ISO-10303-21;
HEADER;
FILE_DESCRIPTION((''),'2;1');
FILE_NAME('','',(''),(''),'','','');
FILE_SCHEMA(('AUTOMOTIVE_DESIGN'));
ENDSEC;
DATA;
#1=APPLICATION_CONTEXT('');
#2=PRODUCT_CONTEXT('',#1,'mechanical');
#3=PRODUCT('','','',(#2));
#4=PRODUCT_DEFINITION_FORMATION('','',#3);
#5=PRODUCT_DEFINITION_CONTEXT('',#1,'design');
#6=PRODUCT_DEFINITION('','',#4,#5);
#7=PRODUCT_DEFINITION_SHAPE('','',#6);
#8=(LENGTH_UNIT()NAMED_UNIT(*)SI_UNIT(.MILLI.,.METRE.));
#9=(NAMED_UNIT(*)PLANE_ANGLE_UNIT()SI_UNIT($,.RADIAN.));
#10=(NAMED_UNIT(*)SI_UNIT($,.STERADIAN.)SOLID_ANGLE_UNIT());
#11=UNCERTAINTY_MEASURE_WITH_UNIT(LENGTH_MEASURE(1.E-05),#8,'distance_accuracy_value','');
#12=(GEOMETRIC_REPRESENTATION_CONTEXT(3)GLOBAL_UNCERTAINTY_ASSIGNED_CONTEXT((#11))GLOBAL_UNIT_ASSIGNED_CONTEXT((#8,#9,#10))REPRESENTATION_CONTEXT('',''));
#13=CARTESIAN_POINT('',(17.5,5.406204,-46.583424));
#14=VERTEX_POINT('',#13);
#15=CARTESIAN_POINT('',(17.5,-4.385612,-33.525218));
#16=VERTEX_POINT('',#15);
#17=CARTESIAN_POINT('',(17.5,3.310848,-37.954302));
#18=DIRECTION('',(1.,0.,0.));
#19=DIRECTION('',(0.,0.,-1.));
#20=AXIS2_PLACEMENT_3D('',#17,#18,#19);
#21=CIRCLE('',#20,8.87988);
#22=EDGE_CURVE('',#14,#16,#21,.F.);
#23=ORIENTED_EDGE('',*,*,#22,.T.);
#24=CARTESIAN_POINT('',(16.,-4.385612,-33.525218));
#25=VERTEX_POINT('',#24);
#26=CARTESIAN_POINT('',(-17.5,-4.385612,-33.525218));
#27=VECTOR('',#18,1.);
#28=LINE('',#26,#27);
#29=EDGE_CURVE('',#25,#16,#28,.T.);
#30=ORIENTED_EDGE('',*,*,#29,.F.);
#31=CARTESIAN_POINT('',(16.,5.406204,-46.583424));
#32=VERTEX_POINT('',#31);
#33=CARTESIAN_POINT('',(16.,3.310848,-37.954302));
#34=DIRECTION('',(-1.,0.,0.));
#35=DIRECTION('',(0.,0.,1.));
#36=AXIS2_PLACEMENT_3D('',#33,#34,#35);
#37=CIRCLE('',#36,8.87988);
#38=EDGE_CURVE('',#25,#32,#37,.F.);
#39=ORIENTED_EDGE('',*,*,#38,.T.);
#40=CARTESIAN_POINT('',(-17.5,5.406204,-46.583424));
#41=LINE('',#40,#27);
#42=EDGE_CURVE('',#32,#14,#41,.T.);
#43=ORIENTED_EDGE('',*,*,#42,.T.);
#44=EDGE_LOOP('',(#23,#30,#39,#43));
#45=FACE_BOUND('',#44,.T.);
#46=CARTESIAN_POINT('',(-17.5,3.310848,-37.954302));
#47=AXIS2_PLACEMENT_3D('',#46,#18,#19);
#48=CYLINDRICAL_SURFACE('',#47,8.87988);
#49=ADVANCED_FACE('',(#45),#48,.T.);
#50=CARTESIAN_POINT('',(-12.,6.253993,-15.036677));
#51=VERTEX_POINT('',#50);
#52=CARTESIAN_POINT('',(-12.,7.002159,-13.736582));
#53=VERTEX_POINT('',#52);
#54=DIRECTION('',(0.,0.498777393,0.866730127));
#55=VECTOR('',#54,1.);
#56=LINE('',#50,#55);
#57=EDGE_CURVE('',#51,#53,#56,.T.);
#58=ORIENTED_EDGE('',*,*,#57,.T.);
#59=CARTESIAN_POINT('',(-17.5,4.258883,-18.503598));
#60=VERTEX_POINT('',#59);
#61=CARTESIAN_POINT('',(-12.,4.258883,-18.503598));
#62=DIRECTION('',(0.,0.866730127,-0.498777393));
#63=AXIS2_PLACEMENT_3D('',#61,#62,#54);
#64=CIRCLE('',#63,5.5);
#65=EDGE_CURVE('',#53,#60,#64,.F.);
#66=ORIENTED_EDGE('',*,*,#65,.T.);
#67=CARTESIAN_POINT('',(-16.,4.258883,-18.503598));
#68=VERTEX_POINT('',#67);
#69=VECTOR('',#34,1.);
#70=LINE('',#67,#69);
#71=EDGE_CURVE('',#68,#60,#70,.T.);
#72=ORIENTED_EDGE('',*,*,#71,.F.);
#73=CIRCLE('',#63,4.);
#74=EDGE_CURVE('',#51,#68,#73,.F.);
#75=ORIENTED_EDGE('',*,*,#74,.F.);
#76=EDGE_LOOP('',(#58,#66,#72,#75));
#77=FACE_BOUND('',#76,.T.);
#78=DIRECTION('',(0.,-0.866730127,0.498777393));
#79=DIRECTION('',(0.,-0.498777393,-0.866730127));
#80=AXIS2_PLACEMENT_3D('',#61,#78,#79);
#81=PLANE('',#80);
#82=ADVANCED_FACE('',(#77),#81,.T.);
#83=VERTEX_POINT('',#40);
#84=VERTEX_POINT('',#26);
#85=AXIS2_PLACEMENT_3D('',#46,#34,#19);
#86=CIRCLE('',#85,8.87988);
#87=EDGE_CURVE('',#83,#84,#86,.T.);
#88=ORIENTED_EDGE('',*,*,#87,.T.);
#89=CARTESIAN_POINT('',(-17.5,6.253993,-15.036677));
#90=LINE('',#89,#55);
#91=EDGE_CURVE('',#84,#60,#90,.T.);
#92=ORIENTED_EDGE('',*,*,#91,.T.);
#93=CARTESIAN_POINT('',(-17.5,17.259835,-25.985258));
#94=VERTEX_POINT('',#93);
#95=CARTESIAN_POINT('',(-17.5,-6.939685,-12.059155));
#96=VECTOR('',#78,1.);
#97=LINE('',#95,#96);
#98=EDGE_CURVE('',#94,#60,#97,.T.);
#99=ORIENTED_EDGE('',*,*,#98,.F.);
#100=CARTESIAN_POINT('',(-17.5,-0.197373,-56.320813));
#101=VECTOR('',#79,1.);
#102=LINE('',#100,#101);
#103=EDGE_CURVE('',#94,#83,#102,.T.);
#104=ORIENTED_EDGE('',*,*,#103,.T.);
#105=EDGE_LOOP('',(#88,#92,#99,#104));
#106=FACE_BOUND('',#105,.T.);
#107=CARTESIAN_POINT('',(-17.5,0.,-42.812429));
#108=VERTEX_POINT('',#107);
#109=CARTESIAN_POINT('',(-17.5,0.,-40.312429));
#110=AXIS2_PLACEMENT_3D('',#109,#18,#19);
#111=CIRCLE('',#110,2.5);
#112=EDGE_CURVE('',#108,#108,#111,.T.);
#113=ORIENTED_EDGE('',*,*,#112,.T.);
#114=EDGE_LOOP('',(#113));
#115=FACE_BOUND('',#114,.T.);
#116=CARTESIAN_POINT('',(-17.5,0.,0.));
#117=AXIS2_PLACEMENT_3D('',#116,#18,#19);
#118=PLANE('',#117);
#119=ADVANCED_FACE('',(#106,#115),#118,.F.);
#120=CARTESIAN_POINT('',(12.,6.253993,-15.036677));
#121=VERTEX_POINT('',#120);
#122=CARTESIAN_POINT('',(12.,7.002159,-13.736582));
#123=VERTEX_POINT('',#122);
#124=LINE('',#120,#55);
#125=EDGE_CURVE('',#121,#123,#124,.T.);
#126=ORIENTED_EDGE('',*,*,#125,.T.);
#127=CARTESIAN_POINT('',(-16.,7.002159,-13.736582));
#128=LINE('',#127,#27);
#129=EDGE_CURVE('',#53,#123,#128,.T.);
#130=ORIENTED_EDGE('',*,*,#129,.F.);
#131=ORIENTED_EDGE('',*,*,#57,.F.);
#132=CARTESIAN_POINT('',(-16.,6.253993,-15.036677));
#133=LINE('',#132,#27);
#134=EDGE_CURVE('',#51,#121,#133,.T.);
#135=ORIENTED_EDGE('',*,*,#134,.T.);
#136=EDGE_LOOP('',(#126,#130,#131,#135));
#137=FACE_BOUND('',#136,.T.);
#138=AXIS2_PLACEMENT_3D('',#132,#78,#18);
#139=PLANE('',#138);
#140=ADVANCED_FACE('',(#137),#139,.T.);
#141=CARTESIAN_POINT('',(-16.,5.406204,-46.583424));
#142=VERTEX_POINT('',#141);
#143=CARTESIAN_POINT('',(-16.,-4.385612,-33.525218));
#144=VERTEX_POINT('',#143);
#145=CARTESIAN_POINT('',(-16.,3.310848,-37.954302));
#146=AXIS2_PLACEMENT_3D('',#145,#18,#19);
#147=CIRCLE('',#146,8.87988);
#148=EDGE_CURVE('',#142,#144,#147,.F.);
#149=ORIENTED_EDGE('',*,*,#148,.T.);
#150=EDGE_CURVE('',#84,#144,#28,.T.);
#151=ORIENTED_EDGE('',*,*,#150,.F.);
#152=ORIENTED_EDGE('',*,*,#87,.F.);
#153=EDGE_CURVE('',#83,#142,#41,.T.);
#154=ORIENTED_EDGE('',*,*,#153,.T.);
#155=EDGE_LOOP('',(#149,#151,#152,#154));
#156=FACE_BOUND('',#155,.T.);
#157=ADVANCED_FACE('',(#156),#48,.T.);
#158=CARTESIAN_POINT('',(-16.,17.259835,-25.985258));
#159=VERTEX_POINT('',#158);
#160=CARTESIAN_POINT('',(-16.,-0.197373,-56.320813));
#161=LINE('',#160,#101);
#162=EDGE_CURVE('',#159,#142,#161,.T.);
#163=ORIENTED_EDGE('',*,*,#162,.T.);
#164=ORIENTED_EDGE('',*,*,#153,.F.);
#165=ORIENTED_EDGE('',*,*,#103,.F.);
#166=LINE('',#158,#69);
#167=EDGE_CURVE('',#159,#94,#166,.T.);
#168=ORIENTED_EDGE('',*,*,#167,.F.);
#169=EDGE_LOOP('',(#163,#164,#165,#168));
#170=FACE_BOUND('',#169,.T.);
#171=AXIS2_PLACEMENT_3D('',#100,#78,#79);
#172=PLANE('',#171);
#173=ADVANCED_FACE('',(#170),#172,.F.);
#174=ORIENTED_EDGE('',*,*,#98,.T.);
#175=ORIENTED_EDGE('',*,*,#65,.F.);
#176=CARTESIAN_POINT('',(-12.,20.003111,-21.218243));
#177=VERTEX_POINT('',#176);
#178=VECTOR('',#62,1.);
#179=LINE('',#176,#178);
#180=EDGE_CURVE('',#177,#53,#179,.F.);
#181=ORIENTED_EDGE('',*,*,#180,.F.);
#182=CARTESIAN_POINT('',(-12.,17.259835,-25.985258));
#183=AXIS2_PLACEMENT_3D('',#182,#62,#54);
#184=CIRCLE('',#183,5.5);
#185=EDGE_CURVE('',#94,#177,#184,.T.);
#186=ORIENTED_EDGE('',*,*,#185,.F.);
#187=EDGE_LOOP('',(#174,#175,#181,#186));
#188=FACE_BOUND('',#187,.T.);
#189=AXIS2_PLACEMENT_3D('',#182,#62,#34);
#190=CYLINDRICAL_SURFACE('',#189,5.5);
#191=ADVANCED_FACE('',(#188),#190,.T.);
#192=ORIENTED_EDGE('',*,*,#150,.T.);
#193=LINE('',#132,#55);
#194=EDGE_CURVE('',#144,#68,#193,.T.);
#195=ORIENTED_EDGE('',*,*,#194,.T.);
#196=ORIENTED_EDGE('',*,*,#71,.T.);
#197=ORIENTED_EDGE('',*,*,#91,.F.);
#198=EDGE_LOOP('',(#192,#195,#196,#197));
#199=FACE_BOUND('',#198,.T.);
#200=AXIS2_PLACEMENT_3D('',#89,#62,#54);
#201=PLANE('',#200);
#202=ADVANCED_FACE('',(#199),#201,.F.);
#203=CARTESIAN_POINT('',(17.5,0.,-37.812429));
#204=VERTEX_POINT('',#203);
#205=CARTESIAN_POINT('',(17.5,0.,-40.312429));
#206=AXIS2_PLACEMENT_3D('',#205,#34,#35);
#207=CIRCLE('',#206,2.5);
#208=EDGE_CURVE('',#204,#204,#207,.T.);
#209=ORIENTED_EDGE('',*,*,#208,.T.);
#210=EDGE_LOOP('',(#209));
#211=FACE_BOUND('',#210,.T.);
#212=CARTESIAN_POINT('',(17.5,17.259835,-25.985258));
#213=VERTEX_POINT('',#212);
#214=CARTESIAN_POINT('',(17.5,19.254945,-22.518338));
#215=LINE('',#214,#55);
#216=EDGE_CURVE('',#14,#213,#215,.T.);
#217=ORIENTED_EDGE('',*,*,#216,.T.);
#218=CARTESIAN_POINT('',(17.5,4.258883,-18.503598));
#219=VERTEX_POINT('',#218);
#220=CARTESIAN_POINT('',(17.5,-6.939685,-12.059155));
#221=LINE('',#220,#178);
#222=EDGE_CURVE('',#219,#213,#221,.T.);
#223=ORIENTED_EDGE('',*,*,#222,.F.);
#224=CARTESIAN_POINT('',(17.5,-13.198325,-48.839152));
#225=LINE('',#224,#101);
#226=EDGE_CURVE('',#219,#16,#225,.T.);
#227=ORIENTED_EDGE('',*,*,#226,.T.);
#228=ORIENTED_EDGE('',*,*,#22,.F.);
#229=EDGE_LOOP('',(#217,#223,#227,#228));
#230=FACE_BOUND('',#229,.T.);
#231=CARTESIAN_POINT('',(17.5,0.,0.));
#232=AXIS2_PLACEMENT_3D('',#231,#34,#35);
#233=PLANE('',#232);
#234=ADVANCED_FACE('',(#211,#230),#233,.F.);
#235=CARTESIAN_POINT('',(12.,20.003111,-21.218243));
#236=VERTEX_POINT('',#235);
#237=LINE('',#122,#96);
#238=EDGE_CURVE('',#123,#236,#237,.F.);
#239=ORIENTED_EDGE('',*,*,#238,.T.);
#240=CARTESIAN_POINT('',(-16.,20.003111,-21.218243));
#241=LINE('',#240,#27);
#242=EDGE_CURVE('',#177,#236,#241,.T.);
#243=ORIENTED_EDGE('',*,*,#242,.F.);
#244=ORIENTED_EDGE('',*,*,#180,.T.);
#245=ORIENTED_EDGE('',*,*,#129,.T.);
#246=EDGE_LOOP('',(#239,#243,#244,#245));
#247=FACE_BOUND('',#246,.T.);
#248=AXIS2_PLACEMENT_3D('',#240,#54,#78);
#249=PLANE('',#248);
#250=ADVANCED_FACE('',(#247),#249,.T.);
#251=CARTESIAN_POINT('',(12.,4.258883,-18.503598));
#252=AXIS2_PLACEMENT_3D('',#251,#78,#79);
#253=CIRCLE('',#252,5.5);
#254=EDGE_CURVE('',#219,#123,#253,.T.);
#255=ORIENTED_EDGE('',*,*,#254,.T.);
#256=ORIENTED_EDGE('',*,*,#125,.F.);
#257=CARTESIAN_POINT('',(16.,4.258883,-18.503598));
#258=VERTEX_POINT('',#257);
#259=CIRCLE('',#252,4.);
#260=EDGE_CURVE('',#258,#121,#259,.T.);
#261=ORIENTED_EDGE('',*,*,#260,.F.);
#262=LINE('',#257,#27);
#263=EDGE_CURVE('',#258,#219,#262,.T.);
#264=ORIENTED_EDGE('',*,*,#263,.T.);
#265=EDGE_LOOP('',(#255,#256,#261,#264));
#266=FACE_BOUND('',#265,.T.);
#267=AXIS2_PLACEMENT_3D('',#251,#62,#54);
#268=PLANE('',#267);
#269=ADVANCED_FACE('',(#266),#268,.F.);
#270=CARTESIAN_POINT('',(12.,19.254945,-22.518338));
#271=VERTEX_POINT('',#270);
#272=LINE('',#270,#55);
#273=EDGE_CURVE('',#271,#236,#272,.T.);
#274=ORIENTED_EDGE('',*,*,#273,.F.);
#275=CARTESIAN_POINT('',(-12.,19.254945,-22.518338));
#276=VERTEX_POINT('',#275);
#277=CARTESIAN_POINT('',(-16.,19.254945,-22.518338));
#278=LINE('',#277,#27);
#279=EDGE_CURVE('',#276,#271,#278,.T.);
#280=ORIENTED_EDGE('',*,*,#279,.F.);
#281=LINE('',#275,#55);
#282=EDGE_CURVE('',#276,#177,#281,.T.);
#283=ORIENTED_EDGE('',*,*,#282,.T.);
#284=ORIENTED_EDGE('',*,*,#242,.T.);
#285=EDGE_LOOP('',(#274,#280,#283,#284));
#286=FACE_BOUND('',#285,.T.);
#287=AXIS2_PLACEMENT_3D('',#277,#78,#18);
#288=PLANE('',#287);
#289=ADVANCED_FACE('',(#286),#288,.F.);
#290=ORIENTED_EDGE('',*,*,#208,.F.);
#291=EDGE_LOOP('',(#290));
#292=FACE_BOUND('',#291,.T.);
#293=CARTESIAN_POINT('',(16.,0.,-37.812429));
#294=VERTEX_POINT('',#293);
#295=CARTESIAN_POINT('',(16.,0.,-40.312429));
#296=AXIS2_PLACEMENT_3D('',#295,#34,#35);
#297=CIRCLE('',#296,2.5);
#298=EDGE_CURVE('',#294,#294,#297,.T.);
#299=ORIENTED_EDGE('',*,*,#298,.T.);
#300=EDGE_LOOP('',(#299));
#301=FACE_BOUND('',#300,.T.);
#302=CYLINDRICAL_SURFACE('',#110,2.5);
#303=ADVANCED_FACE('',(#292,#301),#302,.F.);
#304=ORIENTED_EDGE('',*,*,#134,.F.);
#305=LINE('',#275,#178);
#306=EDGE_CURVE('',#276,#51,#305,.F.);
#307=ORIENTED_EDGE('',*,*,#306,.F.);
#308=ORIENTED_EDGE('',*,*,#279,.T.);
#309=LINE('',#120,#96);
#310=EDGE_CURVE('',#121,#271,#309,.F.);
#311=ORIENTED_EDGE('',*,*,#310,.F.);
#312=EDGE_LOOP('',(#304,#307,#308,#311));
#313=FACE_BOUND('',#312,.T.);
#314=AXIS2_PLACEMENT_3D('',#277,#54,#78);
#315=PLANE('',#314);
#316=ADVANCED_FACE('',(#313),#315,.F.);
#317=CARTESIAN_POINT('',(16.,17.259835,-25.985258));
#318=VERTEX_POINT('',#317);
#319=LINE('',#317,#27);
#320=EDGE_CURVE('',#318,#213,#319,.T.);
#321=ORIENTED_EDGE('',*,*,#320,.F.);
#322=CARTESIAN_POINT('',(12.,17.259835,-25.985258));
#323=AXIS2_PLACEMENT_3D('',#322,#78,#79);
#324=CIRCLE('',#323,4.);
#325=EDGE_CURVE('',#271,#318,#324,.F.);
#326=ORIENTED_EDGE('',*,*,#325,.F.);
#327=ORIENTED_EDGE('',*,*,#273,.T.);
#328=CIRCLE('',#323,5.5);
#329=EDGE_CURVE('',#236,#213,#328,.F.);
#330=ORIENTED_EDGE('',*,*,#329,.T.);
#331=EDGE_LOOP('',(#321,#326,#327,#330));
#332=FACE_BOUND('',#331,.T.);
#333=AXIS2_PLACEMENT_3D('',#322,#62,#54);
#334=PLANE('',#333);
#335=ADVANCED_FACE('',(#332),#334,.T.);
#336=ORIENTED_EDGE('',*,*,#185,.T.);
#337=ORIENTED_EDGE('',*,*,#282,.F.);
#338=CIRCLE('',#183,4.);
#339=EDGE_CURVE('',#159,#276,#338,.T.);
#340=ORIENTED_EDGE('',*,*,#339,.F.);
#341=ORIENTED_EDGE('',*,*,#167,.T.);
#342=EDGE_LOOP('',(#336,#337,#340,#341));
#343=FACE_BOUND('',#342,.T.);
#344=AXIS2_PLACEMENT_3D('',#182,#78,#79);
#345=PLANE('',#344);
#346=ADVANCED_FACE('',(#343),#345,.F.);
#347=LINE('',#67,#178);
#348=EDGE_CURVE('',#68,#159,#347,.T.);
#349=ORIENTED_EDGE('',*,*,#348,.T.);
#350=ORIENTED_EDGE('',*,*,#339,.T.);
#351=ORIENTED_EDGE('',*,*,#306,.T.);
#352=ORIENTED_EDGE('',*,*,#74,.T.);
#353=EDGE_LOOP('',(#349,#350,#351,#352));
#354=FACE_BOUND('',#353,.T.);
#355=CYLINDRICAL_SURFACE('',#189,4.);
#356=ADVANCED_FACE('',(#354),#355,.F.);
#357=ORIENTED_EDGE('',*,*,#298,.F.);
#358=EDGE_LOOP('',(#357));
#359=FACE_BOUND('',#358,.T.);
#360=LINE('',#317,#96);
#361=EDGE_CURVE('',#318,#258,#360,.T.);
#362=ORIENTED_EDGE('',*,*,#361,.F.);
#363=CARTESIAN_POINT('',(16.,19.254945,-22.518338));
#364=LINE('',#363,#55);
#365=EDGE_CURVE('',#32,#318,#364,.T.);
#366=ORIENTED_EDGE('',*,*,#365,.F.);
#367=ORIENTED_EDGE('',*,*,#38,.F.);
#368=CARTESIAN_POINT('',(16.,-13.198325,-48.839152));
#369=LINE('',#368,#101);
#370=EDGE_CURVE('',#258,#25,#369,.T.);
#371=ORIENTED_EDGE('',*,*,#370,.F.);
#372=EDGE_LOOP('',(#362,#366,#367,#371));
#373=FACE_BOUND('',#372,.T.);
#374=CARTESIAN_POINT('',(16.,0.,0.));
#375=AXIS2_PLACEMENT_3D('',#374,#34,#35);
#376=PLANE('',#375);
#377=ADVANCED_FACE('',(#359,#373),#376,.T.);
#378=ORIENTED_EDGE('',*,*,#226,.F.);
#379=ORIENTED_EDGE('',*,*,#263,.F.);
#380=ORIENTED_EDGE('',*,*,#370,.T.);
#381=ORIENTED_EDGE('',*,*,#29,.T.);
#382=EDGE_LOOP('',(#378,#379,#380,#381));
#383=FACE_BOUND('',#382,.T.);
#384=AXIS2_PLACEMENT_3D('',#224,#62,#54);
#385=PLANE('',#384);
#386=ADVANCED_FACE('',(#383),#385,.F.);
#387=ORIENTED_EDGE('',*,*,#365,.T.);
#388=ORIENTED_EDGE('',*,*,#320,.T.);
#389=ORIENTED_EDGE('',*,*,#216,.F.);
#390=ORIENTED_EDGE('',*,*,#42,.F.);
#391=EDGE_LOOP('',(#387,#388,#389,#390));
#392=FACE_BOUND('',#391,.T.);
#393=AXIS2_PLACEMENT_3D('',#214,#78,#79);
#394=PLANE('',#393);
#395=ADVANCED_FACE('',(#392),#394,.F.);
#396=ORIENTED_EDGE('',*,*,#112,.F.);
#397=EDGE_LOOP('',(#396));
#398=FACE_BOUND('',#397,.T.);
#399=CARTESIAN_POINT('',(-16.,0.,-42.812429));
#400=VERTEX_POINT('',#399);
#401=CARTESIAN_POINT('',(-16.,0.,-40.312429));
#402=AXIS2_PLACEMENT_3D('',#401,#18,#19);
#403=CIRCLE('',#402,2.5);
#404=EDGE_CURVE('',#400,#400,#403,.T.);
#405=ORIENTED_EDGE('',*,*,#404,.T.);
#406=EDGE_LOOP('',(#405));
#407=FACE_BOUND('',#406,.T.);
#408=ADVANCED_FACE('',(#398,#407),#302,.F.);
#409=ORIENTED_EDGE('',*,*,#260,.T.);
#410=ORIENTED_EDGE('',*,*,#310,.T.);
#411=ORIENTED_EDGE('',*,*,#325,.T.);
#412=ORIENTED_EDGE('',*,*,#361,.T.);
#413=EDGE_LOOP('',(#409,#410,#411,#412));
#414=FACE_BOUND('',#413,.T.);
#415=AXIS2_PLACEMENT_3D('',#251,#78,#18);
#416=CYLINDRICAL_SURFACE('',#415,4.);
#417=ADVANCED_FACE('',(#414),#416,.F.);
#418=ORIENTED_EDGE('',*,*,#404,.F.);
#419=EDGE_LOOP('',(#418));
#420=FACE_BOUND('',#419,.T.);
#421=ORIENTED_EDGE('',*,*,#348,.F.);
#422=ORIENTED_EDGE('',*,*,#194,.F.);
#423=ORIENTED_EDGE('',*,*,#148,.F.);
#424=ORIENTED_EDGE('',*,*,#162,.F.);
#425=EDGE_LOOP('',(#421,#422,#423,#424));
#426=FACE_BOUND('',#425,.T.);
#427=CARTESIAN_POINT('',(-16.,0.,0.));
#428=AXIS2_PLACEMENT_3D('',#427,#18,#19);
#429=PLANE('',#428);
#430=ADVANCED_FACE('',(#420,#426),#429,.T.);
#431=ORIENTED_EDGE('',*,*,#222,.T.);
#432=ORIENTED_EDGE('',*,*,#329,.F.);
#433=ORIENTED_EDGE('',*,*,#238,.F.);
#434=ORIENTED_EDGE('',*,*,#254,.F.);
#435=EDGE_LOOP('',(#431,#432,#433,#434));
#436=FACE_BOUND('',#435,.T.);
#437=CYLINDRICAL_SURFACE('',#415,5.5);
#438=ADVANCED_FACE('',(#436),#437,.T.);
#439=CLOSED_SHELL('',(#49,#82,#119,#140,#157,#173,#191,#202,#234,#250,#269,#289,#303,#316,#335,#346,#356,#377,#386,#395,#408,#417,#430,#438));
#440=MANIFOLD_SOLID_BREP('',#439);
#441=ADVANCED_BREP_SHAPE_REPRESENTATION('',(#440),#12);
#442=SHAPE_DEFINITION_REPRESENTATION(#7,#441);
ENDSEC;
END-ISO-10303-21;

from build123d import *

# Parameters (mm, degrees)
BOSS_EXTRUDE1_DEPTH            = 16
BOSS_EXTRUDE1_DEPTH_BACK       = 16
EDGE_FLANGE1_STRIP_W           = 14
EDGE_FLANGE1_STRIP_H           = 1.5
EDGE_FLANGE1_STRIP_CUT_DEPTH   = 15
EDGE_FLANGE1_STRIP_2_W         = 14
EDGE_FLANGE1_STRIP_2_H         = 1.5
EDGE_FLANGE1_STRIP_CUT_2_DEPTH = 15
EDGE_FLANGE1_DEPTH             = 15
EDGE_FLANGE1_BEND_DEPTH        = 15
CUT_EXTRUDE1_DEPTH             = 70.261521918
CUT_EXTRUDE1_DEPTH_BACK        = 70.261521918
SKETCH12_R                     = 2.5


# Sheet-metal steps are written as plain solids
with BuildPart() as part:
    # Sketch1 → Boss-Extrude1 (new, two sides: drawn at the far end of the back side and taken through both)
    with BuildSketch(Plane(origin=(0, 0, 0), x_dir=(0, 0, -1), z_dir=(1, 0, 0)).offset(-BOSS_EXTRUDE1_DEPTH_BACK)):
        Polygon((13.736581906, 7.002159097), (21.218242798, 20.003110997), (22.518337988, 19.254944908), (15.036677096, 6.253993008), align=None)
    extrude(amount=BOSS_EXTRUDE1_DEPTH + BOSS_EXTRUDE1_DEPTH_BACK)

    # Edge-Flange1 strip (across the edge) → Edge-Flange1 strip cut (cut)
    with BuildSketch(Plane(origin=(16, 19.254944908, -22.518337988), x_dir=(-1, 0, 0), z_dir=(0, -0.8667301266485011, 0.498777392791487))):
        with Locations((-3, -0.75)):
            Rectangle(EDGE_FLANGE1_STRIP_W, EDGE_FLANGE1_STRIP_H)
    extrude(amount=EDGE_FLANGE1_STRIP_CUT_DEPTH, mode=Mode.SUBTRACT)

    # Edge-Flange1 strip 2 (across the edge) → Edge-Flange1 strip cut 2 (cut)
    with BuildSketch(Plane(origin=(-16, 6.253993008, -15.036677096), x_dir=(1, 0, 0), z_dir=(0, 0.8667301266485011, -0.498777392791487))):
        with Locations((-3, -0.75)):
            Rectangle(EDGE_FLANGE1_STRIP_2_W, EDGE_FLANGE1_STRIP_2_H)
    extrude(amount=EDGE_FLANGE1_STRIP_CUT_2_DEPTH, mode=Mode.SUBTRACT)

    # Edge-Flange1 section (across the edge) → Edge-Flange1 (add)
    with BuildSketch(Plane(origin=(16, 19.254944908, -22.518337988), x_dir=(-1, 0, 0), z_dir=(0, -0.8667301266485011, 0.498777392791487))):
        with BuildLine():
            Line((-1.5, 4), (-1.5, 39))
            Line((-1.5, 39), (0, 39))
            Line((0, 39), (0, 4))
            ThreePointArc((0, 4), (1.171572875, 1.171572875), (4, 0))
            Line((4, 0), (4, -1.5))
            ThreePointArc((4, -1.5), (0.110912703, 0.110912703), (-1.5, 4))
        make_face()
    extrude(amount=EDGE_FLANGE1_DEPTH)

    # Edge-Flange1 section 2 (across the edge) → Edge-Flange1 bend (add)
    with BuildSketch(Plane(origin=(-16, 6.253993008, -15.036677096), x_dir=(1, 0, 0), z_dir=(0, 0.8667301266485011, -0.498777392791487))):
        with BuildLine():
            Line((-1.5, 4), (-1.5, 39))
            Line((-1.5, 39), (0, 39))
            Line((0, 39), (0, 4))
            ThreePointArc((0, 4), (1.171572875, 1.171572875), (4, 0))
            Line((4, 0), (4, -1.5))
            ThreePointArc((4, -1.5), (0.110912703, 0.110912703), (-1.5, 4))
        make_face()
    extrude(amount=EDGE_FLANGE1_BEND_DEPTH)

    # Sketch12 → Cut-Extrude1 (cut, two sides: drawn at the far end of the back side and taken through both)
    with BuildSketch(Plane(origin=(17.5, 0, 0), x_dir=(0, 0, -1), z_dir=(1, 0, 0)).offset(-CUT_EXTRUDE1_DEPTH_BACK)):
        with Locations((40.312429407, 0)):
            Circle(SKETCH12_R)
        with BuildLine():
            Line((33.525218207, -4.385612156), (48.839152035, -13.198325311))
            Line((48.839152035, -13.198325311), (56.320812927, -0.197373411))
            Line((56.320812927, -0.197373411), (46.583424145, 5.406204035))
            ThreePointArc((46.583424145, 5.406204035), (43.281589749, -3.793536651), (33.525218207, -4.385612156))
        make_face()
    extrude(amount=CUT_EXTRUDE1_DEPTH + CUT_EXTRUDE1_DEPTH_BACK, mode=Mode.SUBTRACT)


solid = part.part
